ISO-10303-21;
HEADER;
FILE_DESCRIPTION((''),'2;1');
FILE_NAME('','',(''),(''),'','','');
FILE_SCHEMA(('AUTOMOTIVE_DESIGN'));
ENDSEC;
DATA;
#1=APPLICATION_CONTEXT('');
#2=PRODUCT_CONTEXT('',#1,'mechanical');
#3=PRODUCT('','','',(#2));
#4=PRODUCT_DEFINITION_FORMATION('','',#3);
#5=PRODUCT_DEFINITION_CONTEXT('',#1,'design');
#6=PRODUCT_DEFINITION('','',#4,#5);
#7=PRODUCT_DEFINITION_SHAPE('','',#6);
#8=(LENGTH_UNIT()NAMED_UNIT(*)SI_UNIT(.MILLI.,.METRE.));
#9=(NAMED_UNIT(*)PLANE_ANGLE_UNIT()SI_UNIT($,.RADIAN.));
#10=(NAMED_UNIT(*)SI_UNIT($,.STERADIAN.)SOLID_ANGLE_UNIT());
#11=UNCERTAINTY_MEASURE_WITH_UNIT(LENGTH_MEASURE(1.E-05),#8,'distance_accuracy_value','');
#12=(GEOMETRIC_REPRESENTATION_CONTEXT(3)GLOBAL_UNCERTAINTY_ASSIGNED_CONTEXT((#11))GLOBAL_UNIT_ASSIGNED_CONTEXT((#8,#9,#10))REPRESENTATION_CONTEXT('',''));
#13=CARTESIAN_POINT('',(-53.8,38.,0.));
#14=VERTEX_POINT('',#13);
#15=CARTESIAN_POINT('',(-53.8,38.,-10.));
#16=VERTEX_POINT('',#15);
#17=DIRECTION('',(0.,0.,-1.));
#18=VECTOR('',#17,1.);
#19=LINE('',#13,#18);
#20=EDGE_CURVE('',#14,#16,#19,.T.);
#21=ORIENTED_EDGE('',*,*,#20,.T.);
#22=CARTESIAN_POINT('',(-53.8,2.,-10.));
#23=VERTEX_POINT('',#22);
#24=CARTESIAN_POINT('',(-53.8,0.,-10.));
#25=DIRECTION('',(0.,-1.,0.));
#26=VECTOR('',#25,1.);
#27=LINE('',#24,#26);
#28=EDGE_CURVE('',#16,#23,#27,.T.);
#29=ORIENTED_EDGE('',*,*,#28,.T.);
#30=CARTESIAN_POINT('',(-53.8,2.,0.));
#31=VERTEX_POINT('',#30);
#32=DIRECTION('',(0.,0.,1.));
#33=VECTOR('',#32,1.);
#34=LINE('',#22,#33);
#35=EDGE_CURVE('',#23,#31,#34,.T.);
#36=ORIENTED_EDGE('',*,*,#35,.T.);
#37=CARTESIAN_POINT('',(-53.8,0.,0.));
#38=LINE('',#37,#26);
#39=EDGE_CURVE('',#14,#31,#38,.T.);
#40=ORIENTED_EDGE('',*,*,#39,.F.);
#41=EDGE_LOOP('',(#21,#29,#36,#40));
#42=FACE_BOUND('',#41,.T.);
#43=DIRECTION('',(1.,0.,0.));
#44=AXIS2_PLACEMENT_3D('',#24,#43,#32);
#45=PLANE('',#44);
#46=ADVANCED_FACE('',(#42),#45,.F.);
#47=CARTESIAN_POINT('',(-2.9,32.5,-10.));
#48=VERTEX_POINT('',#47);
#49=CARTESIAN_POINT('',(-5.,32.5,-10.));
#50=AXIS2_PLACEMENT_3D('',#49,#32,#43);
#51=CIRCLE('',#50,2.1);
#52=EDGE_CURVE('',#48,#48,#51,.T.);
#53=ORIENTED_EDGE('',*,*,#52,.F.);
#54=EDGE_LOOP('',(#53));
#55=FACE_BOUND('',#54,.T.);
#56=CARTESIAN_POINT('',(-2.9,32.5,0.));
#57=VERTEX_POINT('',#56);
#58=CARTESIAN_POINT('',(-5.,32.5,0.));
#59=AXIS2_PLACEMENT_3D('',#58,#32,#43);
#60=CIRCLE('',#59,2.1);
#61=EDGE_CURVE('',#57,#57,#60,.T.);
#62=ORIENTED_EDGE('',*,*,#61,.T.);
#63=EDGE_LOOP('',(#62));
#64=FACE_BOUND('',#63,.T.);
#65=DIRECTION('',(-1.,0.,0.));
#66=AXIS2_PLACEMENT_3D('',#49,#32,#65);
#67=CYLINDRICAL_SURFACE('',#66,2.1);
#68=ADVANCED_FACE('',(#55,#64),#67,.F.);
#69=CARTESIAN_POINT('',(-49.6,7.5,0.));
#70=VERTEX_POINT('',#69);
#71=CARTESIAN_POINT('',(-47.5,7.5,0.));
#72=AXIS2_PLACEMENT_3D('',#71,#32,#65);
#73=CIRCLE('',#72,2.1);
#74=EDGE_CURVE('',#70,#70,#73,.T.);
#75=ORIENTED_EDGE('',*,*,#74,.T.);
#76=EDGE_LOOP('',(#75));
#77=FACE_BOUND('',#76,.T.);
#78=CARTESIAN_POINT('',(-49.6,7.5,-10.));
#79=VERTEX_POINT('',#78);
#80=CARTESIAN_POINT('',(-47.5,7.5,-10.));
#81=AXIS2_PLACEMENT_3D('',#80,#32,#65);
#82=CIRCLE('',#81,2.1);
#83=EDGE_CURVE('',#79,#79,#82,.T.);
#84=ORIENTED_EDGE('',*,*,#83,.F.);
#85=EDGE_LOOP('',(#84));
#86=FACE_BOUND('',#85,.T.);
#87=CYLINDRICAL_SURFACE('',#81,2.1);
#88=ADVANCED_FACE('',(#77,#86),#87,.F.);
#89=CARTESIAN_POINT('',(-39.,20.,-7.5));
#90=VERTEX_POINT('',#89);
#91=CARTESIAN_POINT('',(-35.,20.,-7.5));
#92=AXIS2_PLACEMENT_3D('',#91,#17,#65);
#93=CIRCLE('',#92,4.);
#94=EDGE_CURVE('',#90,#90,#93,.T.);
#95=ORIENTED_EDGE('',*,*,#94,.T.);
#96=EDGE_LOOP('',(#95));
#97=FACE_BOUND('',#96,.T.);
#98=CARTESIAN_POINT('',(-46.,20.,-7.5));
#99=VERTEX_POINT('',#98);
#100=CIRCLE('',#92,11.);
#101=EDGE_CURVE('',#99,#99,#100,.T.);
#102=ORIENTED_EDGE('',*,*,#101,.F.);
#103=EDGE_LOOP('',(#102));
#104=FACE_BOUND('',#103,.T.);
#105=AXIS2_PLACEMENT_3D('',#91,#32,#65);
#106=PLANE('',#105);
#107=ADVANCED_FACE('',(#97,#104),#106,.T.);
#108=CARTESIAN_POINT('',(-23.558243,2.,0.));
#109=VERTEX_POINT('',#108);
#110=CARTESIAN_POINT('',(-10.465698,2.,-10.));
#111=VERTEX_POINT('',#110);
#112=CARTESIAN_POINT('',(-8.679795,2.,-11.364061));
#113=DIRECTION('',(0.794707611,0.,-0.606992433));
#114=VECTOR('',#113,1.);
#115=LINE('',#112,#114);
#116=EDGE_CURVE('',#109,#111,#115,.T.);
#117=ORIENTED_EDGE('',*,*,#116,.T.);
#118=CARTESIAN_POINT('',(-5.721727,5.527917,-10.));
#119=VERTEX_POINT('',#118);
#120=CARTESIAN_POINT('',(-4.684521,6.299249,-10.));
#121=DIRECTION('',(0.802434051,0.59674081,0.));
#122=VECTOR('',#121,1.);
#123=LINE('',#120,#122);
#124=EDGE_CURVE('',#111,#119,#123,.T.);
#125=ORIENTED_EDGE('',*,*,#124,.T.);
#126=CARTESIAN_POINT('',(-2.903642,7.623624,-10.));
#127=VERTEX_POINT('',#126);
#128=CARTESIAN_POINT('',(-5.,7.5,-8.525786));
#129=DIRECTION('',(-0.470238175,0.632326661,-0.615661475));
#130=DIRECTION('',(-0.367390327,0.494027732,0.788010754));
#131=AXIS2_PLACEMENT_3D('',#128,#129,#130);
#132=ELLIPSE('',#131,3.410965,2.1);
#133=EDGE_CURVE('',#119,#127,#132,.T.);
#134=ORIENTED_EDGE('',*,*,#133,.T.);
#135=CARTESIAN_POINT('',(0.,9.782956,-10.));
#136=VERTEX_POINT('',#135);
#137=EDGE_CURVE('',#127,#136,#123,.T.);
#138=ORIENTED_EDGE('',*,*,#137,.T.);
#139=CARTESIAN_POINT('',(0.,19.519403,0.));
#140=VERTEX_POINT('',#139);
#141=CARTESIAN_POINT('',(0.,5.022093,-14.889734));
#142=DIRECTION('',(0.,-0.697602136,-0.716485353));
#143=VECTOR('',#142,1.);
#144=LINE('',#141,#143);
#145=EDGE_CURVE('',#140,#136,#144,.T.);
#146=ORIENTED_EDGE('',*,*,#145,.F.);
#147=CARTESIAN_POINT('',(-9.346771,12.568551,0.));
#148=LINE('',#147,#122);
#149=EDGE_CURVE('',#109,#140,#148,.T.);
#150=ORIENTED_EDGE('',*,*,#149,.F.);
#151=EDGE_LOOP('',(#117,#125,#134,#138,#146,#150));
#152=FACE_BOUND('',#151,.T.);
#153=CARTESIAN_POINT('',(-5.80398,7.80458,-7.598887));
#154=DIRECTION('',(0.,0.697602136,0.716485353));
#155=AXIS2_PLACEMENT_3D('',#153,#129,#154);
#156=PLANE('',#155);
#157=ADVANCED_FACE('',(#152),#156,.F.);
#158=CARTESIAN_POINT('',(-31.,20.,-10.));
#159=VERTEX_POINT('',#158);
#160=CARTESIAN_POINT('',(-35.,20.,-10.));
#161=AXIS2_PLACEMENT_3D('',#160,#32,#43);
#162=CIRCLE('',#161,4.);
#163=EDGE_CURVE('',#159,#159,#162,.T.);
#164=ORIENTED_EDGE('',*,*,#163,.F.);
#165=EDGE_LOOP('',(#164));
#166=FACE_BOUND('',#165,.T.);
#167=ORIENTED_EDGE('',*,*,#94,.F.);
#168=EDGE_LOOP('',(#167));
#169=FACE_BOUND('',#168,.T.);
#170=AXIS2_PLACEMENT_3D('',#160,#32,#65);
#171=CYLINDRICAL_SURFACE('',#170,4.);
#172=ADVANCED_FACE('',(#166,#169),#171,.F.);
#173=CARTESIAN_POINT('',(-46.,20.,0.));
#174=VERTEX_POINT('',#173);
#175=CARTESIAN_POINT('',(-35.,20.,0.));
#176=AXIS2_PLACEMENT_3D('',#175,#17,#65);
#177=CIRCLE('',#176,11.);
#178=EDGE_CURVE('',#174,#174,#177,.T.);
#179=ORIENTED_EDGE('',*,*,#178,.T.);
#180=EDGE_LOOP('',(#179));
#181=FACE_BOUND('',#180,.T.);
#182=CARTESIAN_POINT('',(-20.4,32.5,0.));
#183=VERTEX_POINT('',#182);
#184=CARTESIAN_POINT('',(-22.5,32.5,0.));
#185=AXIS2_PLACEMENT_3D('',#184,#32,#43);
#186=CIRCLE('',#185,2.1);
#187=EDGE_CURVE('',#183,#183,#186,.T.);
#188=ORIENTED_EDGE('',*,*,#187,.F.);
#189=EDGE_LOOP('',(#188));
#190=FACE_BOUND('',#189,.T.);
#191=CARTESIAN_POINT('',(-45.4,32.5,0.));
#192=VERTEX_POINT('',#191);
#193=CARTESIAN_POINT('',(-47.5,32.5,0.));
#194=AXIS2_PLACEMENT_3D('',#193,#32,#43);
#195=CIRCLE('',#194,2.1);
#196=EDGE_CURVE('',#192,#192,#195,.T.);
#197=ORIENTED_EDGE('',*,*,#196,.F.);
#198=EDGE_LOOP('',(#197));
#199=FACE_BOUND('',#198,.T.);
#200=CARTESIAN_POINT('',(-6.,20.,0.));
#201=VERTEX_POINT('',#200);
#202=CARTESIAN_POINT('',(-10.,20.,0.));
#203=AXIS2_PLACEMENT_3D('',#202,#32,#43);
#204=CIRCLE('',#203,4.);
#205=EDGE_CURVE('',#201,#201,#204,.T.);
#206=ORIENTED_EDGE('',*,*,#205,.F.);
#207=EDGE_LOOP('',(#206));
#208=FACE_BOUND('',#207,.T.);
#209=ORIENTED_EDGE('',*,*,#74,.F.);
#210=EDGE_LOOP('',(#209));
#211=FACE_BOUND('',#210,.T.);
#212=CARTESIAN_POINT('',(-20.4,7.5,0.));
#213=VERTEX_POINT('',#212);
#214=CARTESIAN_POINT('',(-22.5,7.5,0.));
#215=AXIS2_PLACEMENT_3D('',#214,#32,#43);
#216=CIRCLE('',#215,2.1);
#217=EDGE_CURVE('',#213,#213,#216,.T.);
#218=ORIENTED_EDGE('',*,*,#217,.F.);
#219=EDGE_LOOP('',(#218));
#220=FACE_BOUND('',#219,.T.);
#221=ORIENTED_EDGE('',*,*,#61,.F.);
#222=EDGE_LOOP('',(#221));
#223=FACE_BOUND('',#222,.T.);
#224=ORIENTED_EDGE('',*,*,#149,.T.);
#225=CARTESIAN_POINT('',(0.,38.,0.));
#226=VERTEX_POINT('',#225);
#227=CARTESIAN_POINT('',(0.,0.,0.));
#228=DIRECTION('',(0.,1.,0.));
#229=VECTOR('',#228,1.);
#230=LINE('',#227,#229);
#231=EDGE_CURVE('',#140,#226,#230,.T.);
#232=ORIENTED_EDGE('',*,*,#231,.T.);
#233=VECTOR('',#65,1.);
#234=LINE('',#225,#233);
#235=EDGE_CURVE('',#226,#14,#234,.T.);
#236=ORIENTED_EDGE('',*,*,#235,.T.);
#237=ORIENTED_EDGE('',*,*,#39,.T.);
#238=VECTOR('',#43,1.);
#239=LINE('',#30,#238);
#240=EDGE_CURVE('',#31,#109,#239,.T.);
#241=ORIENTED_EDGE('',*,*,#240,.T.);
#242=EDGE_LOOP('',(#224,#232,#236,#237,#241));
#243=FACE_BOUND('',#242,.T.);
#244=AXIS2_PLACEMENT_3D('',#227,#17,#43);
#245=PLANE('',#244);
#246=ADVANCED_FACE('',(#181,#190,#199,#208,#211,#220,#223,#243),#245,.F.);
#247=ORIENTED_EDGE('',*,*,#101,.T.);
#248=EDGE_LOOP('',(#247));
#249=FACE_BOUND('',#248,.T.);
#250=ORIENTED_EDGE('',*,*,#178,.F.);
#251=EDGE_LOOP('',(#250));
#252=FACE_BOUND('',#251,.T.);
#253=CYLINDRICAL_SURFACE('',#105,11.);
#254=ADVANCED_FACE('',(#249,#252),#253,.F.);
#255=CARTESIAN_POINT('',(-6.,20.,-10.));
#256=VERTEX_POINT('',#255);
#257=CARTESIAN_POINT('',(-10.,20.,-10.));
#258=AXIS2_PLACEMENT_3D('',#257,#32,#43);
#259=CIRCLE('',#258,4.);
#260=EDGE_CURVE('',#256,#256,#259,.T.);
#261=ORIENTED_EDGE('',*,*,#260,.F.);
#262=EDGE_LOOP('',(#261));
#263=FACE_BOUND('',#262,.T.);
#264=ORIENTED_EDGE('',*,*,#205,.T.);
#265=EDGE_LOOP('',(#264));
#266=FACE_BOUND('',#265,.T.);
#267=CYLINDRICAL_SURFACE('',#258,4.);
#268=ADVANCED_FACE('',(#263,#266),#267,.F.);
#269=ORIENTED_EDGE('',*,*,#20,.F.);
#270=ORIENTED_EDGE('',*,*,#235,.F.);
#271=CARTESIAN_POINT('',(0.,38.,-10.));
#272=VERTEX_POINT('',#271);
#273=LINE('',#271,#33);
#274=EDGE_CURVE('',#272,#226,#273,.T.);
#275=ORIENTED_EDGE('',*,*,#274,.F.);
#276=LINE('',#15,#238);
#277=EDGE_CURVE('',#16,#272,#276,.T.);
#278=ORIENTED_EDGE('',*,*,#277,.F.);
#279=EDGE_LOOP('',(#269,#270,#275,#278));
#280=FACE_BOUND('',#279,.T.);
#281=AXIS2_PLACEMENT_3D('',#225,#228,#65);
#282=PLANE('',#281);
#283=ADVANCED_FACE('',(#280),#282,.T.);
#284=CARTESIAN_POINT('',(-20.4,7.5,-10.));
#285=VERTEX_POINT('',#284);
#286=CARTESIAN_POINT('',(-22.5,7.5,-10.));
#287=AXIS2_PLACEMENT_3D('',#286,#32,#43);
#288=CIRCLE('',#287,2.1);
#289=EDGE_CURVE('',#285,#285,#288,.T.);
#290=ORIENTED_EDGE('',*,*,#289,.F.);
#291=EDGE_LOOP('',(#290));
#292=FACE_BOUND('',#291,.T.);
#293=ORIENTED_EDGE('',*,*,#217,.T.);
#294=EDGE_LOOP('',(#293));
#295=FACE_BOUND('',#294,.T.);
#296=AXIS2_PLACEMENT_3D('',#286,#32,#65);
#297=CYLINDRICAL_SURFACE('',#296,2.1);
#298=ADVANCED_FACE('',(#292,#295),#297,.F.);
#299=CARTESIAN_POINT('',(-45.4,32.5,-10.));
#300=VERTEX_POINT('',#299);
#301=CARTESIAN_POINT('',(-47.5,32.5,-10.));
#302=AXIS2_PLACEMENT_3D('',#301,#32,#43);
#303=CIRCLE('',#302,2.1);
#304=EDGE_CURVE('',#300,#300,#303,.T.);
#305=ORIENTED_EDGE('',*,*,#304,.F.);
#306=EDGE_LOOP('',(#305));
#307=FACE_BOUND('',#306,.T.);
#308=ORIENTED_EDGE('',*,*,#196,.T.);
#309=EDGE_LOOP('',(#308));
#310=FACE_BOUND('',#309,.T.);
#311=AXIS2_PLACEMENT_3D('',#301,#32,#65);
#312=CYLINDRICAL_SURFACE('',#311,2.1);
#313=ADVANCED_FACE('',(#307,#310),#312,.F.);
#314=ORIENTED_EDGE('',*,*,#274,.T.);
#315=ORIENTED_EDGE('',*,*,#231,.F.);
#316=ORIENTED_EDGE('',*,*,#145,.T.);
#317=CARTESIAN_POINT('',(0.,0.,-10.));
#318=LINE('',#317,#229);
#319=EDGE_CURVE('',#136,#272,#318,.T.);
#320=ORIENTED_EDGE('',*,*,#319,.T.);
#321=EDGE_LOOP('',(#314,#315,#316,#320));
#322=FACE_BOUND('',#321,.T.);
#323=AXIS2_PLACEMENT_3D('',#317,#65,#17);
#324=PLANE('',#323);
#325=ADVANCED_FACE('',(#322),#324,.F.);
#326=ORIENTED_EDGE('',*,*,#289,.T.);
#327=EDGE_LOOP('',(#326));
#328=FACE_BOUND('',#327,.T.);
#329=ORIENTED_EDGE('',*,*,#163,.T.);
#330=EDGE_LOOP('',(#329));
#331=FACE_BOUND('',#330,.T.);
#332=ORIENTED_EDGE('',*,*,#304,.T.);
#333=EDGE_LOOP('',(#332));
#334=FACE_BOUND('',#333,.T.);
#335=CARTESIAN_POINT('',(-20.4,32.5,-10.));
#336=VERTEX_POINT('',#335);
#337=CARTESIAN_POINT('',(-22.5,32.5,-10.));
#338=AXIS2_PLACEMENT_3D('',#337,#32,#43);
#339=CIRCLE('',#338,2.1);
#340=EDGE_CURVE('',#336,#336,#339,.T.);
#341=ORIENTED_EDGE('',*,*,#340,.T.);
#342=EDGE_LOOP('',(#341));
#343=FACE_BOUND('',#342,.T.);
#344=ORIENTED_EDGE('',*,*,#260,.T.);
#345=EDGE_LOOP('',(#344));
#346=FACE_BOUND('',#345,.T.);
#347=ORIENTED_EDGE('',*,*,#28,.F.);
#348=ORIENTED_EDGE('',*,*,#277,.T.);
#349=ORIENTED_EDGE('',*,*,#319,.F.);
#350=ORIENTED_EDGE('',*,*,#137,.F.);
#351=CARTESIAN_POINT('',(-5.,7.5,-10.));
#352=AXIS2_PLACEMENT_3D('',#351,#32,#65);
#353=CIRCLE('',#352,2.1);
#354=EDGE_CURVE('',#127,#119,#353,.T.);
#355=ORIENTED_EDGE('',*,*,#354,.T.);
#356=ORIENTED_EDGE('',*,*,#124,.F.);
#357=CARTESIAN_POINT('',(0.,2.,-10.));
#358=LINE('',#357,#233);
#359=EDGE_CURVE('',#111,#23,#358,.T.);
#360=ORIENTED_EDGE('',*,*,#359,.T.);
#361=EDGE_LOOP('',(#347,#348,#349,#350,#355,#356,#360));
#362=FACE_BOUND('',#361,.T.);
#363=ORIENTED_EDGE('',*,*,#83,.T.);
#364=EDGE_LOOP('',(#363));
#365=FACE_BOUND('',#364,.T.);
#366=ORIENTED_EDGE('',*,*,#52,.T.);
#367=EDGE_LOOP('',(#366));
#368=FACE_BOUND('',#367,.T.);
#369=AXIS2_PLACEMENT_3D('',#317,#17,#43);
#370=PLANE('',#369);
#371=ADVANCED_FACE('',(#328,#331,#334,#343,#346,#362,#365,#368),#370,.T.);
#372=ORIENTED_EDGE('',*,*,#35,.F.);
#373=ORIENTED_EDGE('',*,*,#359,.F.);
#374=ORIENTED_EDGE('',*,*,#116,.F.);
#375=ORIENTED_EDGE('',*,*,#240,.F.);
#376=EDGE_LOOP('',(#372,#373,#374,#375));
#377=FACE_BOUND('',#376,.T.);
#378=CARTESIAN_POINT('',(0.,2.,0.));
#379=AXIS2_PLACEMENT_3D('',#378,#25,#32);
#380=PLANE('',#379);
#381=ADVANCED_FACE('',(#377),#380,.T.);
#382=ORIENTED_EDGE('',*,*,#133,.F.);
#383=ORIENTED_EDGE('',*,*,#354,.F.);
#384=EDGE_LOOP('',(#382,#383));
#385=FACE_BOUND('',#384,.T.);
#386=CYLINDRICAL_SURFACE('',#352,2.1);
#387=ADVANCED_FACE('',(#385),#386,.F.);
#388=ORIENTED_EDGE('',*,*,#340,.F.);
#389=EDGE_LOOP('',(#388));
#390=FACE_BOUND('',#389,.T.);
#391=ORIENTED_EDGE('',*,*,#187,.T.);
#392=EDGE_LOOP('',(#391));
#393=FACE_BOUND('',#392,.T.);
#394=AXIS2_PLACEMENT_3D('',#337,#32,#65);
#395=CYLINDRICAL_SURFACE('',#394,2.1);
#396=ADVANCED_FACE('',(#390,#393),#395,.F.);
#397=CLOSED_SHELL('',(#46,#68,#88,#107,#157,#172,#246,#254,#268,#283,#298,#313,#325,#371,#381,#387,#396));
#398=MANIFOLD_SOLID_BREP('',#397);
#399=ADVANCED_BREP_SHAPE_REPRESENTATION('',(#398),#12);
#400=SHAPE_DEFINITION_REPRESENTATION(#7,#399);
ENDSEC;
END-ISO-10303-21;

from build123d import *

# Parameters (mm, degrees)
JOTYY_MIRRORED_START         = -10
JOTYY_MIRRORED_OUTLINE_W     = 53.8
JOTYY_MIRRORED_OUTLINE_H     = 36
JOTYY_MIRRORED_OUTLINE_R     = 2.1
JOTYY_MIRRORED_OUTLINE_R_2   = 11
JOTYY_MIRRORED_DEPTH         = 10
JOTYY_MIRRORED_2_OUTLINE_R   = 11
JOTYY_MIRRORED_2_OUTLINE_R_2 = 4
JOTYY_MIRRORED_2_DEPTH       = 2.5
SKETCH1_R                    = 4
CUT_EXTRUDE1_DEPTH           = 10
CUT_EXTRUDE2_DEPTH           = 58.211226571


# Read off the part's stored shape, not the designer's step: jotyy_Mirrored
with BuildPart() as part:
    # jotyy_Mirrored outline → jotyy_Mirrored (new body)
    with BuildSketch(Plane.XY.offset(JOTYY_MIRRORED_START)):
        with Locations((-26.9, 20)):
            Rectangle(JOTYY_MIRRORED_OUTLINE_W, JOTYY_MIRRORED_OUTLINE_H)
        with Locations((-47.5, 7.5)):
            Circle(JOTYY_MIRRORED_OUTLINE_R, mode=Mode.SUBTRACT)
        with Locations((-22.5, 7.5)):
            Circle(JOTYY_MIRRORED_OUTLINE_R, mode=Mode.SUBTRACT)
        with Locations((-5, 7.5)):
            Circle(JOTYY_MIRRORED_OUTLINE_R, mode=Mode.SUBTRACT)
        with Locations((-35, 20)):
            Circle(JOTYY_MIRRORED_OUTLINE_R_2, mode=Mode.SUBTRACT)
        with Locations((-47.5, 32.5)):
            Circle(JOTYY_MIRRORED_OUTLINE_R, mode=Mode.SUBTRACT)
        with Locations((-22.5, 32.5)):
            Circle(JOTYY_MIRRORED_OUTLINE_R, mode=Mode.SUBTRACT)
        with Locations((-5, 32.5)):
            Circle(JOTYY_MIRRORED_OUTLINE_R, mode=Mode.SUBTRACT)
    extrude(amount=JOTYY_MIRRORED_DEPTH)

    # jotyy_Mirrored 2 outline → jotyy_Mirrored 2 (add)
    with BuildSketch(Plane.XY.offset(JOTYY_MIRRORED_START)):
        with Locations((-35, 20)):
            Circle(JOTYY_MIRRORED_2_OUTLINE_R)
        with Locations((-35, 20)):
            Circle(JOTYY_MIRRORED_2_OUTLINE_R_2, mode=Mode.SUBTRACT)
    extrude(amount=JOTYY_MIRRORED_2_DEPTH)

    # Sketch1 → Cut-Extrude1 (cut)
    with BuildSketch(Plane.XY):
        with Locations((-10, 20)):
            Circle(SKETCH1_R)
    extrude(amount=-CUT_EXTRUDE1_DEPTH, mode=Mode.SUBTRACT)

    # Sketch4 → Cut-Extrude2 (cut, through all)
    with BuildSketch(Plane(origin=(-5.803979924, 7.804579549, -7.598887182), x_dir=(-0.8814294563143725, -0.3015166465944173, 0.36355168183878195), z_dir=(-0.47023817530075585, 0.6323266610618664, -0.6156614753256593))):
        Polygon((64.66091517, 41.829227813), (-62.885997207, -203.452641014), (-179.111332111, -143.015305479), (-51.564419733, 102.266563348), align=None)
    extrude(amount=-CUT_EXTRUDE2_DEPTH, mode=Mode.SUBTRACT)


solid = part.part
